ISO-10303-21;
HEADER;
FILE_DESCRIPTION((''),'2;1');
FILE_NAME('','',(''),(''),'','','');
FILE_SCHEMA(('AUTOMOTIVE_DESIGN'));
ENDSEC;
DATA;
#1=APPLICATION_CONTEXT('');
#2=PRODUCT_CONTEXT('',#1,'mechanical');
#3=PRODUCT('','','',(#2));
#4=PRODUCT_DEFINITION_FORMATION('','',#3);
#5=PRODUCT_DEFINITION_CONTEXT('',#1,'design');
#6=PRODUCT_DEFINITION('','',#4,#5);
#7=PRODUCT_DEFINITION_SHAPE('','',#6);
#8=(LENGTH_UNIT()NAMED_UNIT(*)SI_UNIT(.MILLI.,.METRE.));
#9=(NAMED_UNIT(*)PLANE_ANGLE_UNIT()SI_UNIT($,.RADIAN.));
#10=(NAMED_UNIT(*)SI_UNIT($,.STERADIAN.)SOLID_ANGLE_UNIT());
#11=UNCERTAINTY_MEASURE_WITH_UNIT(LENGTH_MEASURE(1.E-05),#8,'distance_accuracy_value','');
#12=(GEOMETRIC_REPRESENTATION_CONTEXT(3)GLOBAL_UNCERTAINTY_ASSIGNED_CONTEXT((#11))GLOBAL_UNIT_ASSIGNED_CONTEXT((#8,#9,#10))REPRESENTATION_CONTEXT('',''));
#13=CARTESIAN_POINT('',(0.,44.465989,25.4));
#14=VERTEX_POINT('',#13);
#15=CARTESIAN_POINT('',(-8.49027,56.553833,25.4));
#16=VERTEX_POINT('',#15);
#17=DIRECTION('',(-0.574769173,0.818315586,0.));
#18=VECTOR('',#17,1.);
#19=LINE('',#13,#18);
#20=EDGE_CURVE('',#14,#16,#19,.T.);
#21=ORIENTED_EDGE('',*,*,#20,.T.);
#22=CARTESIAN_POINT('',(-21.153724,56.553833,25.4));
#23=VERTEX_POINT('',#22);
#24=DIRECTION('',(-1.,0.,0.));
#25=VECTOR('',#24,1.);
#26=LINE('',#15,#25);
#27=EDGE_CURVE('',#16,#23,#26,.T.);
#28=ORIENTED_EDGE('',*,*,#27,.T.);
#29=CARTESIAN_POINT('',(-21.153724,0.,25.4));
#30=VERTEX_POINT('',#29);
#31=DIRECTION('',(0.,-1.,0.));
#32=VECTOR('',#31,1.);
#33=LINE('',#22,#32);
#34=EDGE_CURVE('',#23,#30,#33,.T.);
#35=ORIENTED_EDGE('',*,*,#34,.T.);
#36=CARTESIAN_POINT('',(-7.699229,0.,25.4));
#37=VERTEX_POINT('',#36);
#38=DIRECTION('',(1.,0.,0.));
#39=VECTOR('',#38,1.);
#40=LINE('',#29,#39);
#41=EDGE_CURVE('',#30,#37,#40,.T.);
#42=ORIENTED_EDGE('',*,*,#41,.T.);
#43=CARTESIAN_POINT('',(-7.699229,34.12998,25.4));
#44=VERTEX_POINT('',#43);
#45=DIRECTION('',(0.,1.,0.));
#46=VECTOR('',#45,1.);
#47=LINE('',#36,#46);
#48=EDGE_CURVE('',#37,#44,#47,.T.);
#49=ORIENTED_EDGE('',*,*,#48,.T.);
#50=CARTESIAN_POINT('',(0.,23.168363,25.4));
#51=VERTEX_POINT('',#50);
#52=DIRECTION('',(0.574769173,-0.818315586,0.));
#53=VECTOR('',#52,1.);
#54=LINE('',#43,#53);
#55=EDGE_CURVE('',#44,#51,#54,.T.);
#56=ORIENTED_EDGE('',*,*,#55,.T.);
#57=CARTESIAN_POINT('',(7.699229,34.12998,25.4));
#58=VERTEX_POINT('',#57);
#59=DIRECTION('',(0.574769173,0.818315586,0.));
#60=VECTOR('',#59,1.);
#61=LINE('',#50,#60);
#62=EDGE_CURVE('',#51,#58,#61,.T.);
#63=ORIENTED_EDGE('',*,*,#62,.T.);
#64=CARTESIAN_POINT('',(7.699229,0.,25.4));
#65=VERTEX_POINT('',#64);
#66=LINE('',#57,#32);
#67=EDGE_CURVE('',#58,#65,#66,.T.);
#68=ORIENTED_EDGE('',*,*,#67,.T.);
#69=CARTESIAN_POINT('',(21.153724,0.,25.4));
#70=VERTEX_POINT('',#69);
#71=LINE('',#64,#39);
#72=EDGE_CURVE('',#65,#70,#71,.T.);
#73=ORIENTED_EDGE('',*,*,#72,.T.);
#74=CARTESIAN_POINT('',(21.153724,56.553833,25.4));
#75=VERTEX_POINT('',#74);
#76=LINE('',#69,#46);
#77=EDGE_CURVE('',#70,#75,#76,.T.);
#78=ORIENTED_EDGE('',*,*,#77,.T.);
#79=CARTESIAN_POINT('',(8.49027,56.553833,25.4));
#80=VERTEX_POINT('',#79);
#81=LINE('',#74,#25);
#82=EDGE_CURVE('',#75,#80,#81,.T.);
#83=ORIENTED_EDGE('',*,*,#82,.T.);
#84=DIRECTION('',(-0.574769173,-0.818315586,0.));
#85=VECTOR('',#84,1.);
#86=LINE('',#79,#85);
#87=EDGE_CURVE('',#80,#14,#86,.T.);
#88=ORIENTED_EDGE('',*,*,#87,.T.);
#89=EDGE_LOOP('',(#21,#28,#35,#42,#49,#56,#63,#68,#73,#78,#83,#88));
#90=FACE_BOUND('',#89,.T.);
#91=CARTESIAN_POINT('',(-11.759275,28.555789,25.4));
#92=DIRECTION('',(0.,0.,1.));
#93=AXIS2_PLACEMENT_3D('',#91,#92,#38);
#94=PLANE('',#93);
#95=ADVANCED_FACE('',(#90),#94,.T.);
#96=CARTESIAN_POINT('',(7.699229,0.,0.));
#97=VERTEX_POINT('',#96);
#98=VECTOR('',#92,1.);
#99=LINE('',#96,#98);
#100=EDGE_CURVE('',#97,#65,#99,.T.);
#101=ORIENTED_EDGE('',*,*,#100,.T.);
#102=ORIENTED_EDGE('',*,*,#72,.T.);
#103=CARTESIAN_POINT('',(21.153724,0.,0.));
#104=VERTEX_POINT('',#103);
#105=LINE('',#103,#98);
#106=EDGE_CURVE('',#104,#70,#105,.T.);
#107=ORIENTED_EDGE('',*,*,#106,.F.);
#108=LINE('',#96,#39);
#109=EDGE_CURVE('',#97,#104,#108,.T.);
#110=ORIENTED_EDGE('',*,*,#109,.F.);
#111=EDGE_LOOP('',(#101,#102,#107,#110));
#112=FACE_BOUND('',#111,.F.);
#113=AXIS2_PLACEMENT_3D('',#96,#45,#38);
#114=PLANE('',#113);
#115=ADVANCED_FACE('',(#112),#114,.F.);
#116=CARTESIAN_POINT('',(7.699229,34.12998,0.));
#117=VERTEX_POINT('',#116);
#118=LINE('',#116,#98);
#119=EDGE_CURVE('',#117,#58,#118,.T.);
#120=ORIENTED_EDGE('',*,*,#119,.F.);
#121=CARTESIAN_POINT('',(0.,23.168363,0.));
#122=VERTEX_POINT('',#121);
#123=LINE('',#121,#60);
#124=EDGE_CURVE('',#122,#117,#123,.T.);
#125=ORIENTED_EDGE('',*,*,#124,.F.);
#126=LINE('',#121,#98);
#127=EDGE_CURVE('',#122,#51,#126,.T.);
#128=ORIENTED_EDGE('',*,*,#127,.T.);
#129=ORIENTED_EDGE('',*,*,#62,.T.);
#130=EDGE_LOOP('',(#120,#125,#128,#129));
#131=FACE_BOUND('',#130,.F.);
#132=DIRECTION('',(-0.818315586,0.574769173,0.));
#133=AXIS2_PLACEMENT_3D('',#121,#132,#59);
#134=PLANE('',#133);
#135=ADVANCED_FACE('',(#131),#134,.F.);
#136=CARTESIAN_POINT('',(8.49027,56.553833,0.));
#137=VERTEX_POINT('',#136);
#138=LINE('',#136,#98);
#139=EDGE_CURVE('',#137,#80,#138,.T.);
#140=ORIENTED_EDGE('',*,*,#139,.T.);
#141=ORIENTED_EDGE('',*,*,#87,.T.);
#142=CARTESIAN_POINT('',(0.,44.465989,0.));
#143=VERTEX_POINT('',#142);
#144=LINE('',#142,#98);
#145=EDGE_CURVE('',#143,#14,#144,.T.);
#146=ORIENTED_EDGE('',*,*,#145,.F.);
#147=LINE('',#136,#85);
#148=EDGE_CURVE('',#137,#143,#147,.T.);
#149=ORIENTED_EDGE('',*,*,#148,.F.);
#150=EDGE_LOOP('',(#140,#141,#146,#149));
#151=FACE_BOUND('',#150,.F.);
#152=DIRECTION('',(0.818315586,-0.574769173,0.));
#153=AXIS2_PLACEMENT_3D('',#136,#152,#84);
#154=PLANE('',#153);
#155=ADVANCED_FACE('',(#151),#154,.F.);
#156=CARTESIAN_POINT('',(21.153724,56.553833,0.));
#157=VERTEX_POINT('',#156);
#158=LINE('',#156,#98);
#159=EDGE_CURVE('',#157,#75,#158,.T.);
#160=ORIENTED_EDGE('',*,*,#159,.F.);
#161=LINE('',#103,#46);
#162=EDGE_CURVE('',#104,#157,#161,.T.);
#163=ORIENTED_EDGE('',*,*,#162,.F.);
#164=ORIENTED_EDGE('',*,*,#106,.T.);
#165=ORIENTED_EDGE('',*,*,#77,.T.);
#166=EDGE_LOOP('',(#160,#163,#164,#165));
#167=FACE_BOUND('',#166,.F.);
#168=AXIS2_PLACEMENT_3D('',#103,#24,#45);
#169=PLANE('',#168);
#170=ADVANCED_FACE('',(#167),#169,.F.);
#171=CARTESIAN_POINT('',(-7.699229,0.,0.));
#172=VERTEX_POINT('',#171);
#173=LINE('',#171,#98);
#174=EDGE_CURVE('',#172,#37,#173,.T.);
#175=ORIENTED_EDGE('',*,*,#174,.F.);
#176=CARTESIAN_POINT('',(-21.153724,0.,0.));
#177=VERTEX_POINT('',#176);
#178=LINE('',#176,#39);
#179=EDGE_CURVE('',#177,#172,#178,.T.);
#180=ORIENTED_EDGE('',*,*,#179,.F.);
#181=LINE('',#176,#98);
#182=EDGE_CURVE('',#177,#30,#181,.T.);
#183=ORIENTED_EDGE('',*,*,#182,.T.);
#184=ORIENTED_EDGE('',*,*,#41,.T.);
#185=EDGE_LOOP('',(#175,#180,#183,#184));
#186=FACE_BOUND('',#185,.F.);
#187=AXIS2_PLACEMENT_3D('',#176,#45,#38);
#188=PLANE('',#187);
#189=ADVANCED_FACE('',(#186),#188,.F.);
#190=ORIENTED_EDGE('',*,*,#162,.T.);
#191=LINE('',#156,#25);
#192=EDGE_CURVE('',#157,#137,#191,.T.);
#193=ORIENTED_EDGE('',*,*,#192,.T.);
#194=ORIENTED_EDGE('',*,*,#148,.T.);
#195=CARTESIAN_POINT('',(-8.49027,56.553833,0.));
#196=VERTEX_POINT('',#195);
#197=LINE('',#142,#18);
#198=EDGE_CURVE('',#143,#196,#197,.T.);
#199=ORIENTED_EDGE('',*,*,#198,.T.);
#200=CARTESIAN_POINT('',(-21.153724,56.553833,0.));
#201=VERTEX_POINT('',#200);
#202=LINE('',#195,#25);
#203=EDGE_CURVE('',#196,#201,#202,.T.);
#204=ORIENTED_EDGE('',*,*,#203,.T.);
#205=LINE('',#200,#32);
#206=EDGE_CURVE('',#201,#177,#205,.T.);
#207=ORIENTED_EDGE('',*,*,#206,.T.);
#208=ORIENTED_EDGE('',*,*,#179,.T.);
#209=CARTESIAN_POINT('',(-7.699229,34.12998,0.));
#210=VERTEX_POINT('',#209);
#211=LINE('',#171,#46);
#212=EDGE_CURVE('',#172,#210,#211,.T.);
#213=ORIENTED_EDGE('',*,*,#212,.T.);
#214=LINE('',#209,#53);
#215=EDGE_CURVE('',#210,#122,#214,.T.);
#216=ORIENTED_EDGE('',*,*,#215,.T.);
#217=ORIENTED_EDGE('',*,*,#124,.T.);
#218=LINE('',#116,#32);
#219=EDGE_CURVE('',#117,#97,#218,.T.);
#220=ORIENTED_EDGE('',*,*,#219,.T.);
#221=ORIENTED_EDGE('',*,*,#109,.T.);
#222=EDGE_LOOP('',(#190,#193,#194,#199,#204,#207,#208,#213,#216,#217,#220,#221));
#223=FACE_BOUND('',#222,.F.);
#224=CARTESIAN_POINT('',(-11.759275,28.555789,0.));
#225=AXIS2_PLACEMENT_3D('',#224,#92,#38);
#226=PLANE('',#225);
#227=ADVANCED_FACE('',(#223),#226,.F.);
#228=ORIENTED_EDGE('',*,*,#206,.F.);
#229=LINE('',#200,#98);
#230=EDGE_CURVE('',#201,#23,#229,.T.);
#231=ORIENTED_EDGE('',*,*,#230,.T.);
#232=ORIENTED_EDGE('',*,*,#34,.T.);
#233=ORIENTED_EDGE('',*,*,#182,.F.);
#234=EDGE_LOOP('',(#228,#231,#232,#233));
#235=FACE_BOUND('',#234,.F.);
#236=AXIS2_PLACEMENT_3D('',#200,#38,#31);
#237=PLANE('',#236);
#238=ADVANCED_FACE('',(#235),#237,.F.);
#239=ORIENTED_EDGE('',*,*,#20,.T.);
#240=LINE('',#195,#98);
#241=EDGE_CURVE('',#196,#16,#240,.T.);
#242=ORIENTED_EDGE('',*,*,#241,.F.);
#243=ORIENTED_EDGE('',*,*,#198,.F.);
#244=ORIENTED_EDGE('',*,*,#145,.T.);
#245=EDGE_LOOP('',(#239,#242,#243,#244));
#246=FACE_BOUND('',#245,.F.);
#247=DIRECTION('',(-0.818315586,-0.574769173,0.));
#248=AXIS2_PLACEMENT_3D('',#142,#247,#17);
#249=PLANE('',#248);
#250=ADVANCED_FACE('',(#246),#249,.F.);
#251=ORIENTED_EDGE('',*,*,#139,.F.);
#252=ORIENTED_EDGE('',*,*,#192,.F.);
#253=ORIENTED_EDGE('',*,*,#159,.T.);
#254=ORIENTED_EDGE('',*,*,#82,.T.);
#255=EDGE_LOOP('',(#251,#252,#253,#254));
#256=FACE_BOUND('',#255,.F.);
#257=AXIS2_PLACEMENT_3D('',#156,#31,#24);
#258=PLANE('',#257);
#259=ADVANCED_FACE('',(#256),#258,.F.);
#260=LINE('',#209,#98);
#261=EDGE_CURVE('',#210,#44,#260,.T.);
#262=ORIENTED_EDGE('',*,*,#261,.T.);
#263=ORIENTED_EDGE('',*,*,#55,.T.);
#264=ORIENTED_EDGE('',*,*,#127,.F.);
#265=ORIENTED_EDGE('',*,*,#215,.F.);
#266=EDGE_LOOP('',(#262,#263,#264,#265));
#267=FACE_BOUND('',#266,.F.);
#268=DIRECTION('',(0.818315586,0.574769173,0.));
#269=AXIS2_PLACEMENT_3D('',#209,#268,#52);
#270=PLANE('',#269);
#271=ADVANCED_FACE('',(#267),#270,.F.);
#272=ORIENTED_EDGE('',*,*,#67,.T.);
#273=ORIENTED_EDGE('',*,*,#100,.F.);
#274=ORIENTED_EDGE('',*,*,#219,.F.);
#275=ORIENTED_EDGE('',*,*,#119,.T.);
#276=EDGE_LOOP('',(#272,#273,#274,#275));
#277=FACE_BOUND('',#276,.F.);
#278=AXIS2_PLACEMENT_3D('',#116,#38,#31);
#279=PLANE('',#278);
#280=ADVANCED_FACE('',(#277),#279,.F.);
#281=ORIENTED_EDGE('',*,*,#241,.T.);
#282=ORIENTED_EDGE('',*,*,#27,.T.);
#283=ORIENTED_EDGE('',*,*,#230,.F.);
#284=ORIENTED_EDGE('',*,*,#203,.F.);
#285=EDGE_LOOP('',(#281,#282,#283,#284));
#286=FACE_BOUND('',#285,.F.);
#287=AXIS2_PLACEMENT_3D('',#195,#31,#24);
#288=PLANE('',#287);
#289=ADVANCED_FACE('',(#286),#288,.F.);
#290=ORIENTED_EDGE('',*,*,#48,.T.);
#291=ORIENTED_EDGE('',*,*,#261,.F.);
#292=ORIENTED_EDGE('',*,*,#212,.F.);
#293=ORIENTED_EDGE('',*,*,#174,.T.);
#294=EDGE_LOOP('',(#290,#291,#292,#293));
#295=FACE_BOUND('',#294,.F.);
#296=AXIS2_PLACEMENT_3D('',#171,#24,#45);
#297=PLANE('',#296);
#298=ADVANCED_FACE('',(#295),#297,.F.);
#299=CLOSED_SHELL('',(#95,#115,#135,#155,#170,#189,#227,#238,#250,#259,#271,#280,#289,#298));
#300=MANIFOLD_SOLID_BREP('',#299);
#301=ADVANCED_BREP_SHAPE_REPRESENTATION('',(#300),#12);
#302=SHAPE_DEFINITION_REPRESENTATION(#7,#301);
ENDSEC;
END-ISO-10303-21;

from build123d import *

# Parameters (mm, degrees)
F0_W          = 29.8302113987
F0_H          = 9.2097856104
F1_DEPTH      = 25.4
F2_T1_DEPTH   = 25.4
F2_T3_DEPTH   = 15.24
F2_T5_DEPTH   = 56.4671399768
F2_T7_DEPTH   = 44.9504289544
F2_T9_DEPTH   = 56.4670330548
F2_T11_DEPTH  = 20.32
F2_T13_DEPTH  = 20.3101045111
F2_T15_DEPTH  = 50.8
F2_T20_DEPTH  = 5.08
F2_T26_DEPTH  = 5.08
F2_T32_DEPTH  = 5.08
F2_T38_DEPTH  = 5.08
F2_S43_W      = 5.08
F2_S43_H      = 5.08
F2_T44_DEPTH  = 5.08
F2_S49_W      = 5.08
F2_S49_H      = 5.08
F2_T50_DEPTH  = 5.08
F2_S55_W      = 5.08
F2_S55_H      = 5.08
F2_T56_DEPTH  = 5.08
F2_S61_W      = 5.08
F2_S61_H      = 5.08
F2_T62_DEPTH  = 5.08
F2_T65_DEPTH  = 11.1376243347
F2_T67_DEPTH  = 11.5693333262
F2_T69_DEPTH  = 19.6702113987
F2_S73_W      = 5.08
F2_S73_H      = 5.08
F2_T74_DEPTH  = 5.08
F2_S79_W      = 5.08
F2_S79_H      = 5.08
F2_T80_DEPTH  = 5.08
F2_S85_W      = 5.08
F2_S85_H      = 5.08
F2_T86_DEPTH  = 5.08
F2_S91_W      = 5.08
F2_S91_H      = 5.08
F2_T92_DEPTH  = 5.08
F2_T96_ANGLE  = 90
F2_T98_ANGLE  = 90
F2_T100_ANGLE = 90
F2_T102_ANGLE = 90
F2_T104_ANGLE = 90
F2_T106_ANGLE = 90
F2_T108_ANGLE = 90
F2_T110_ANGLE = 90
F2_T112_ANGLE = 90
F2_T114_ANGLE = 90
F2_T116_ANGLE = 90
F2_T118_ANGLE = 90
F3_DEPTH      = 25.4
F6_DEPTH      = 25.4


# Not quite as in the source:
# - a fillet or chamfer that OpenCascade refuses, or shapes differently, is made with other operations: its cross-section is extruded or revolved along the edge and cut away or added


with BuildPart() as f1:
    # F0 (on Top) → F1 (new body)
    with BuildSketch(Plane.XY):
        Polygon((-27.6151056993, 52.1290511863), (-27.6151056993, 0), (-14.9151056993, 0), (-14.9151056993, 21.7293333262), (-14.9151056993, 30.9391189367), (-14.9151056993, 52.2367432714), (14.9151056993, 52.2367432714), (14.9151056993, 30.9391189367), (14.9151056993, 21.7293333262), (14.9151056993, 0), (27.6151056993, 0), (27.4854470044, 66.6270330548), (-27.6151056993, 66.6270330548), align=None)
        with Locations((0, 26.3342261314)):
            Rectangle(F0_W, F0_H)
    extrude(amount=F1_DEPTH)

    # F2: fillet of radius 5.08 on 36 edges, made by hand

    # F2_s2 → F2_t1 (join)
    with BuildSketch(Plane.XY):
        with BuildLine():
            ThreePointArc((-14.9151056993, 36.0191189367), (-13.4272081478, 32.4270164882), (-9.8351056993, 30.9391189367))
            Line((-9.8351056993, 30.9391189367), (-14.9151056993, 30.9391189367))
            Line((-14.9151056993, 30.9391189367), (-14.9151056993, 36.0191189367))
        make_face()
        with BuildLine():
            ThreePointArc((-14.9151056993, 47.1567432714), (-13.4272081478, 50.7488457198), (-9.8351056993, 52.2367432714))
            Line((-9.8351056993, 52.2367432714), (-14.9151056993, 52.2367432714))
            Line((-14.9151056993, 52.2367432714), (-14.9151056993, 47.1567432714))
        make_face()
        with BuildLine():
            ThreePointArc((9.8351056993, 52.2367432714), (13.4272081478, 50.7488457198), (14.9151056993, 47.1567432714))
            Line((14.9151056993, 47.1567432714), (14.9151056993, 52.2367432714))
            Line((14.9151056993, 52.2367432714), (9.8351056993, 52.2367432714))
        make_face()
        with BuildLine():
            ThreePointArc((14.9151056993, 36.0191189367), (13.4272081478, 32.4270164882), (9.8351056993, 30.9391189367))
            Line((9.8351056993, 30.9391189367), (14.9151056993, 30.9391189367))
            Line((14.9151056993, 30.9391189367), (14.9151056993, 36.0191189367))
        make_face()
        with BuildLine():
            ThreePointArc((9.8351056993, 21.7293333262), (13.4272081478, 20.2414357746), (14.9151056993, 16.6493333262))
            Line((14.9151056993, 16.6493333262), (14.9151056993, 21.7293333262))
            Line((14.9151056993, 21.7293333262), (9.8351056993, 21.7293333262))
        make_face()
        with BuildLine():
            ThreePointArc((-14.9151056993, 16.6493333262), (-13.4272081478, 20.2414357746), (-9.8351056993, 21.7293333262))
            Line((-9.8351056993, 21.7293333262), (-14.9151056993, 21.7293333262))
            Line((-14.9151056993, 21.7293333262), (-14.9151056993, 16.6493333262))
        make_face()
    extrude(amount=F2_T1_DEPTH)

    # F2_s4 → F2_t3 (cut)
    with BuildSketch(Plane.XY.offset(5.08)):
        with BuildLine():
            ThreePointArc((27.6052005914, 5.089885851), (26.1208061363, 1.4913944298), (22.5252102105, 0))
            Line((22.5252102105, 0), (27.6151056993, 0))
            Line((27.6151056993, 0), (27.6052005914, 5.089885851))
        make_face()
        with BuildLine():
            ThreePointArc((22.4153232551, 66.6270330548), (26.0039288252, 65.1426289806), (27.4953136359, 61.5569189059))
            Line((27.4953136359, 61.5569189059), (27.4854470044, 66.6270330548))
            Line((27.4854470044, 66.6270330548), (22.4153232551, 66.6270330548))
        make_face()
        with BuildLine():
            ThreePointArc((-22.5351056993, 66.6270330548), (-26.1272081478, 65.1391355033), (-27.6151056993, 61.5470330548))
            Line((-27.6151056993, 61.5470330548), (-27.6151056993, 66.6270330548))
            Line((-27.6151056993, 66.6270330548), (-22.5351056993, 66.6270330548))
        make_face()
        with BuildLine():
            ThreePointArc((-27.6151056993, 5.08), (-26.1272081478, 1.4878975516), (-22.5351056993, 0))
            Line((-22.5351056993, 0), (-27.6151056993, 0))
            Line((-27.6151056993, 0), (-27.6151056993, 5.08))
        make_face()
    extrude(amount=F2_T3_DEPTH, mode=Mode.SUBTRACT)

    # F2_s6 → F2_t5 (cut)
    with BuildSketch(Plane(origin=(-0.0098005283, 5.0361460274, 0), x_dir=(0, 0, 1), z_dir=(-0.0019460337, 0.9999981065, 0))):
        with BuildLine():
            ThreePointArc((5.08, 27.6150534094), (1.4878975516, 26.1271558579), (0, 22.5350534094))
            Line((0, 22.5350534094), (0, 27.6150534094))
            Line((0, 27.6150534094), (5.08, 27.6150534094))
        make_face()
        with BuildLine():
            ThreePointArc((20.32, 27.6150534094), (23.9121024484, 26.1271558579), (25.4, 22.5350534094))
            Line((25.4, 22.5350534094), (25.4, 27.6150534094))
            Line((25.4, 27.6150534094), (20.32, 27.6150534094))
        make_face()
    extrude(amount=F2_T5_DEPTH, mode=Mode.SUBTRACT)

    # F2_s8 → F2_t7 (cut)
    with BuildSketch(Plane.YZ.offset(-22.5351056993)):
        with BuildLine():
            ThreePointArc((66.6270330548, 5.08), (65.1391355033, 1.4878975516), (61.5470330548, 0))
            Line((61.5470330548, 0), (66.6270330548, 0))
            Line((66.6270330548, 0), (66.6270330548, 5.08))
        make_face()
        with BuildLine():
            ThreePointArc((66.6270330548, 20.32), (65.1391355033, 23.9121024484), (61.5470330548, 25.4))
            Line((61.5470330548, 25.4), (66.6270330548, 25.4))
            Line((66.6270330548, 25.4), (66.6270330548, 20.32))
        make_face()
    extrude(amount=F2_T7_DEPTH, mode=Mode.SUBTRACT)

    # F2_s10 → F2_t9 (cut)
    with BuildSketch(Plane.XZ.offset(-61.5470330548)):
        with BuildLine():
            ThreePointArc((-27.6151056993, 20.32), (-26.1272081478, 23.9121024484), (-22.5351056993, 25.4))
            Line((-22.5351056993, 25.4), (-27.6151056993, 25.4))
            Line((-27.6151056993, 25.4), (-27.6151056993, 20.32))
        make_face()
        with BuildLine():
            ThreePointArc((-27.6151056993, 5.08), (-26.1272081478, 1.4878975516), (-22.5351056993, 0))
            Line((-22.5351056993, 0), (-27.6151056993, 0))
            Line((-27.6151056993, 0), (-27.6151056993, 5.08))
        make_face()
    extrude(amount=F2_T9_DEPTH, mode=Mode.SUBTRACT)

    # F2_s12 → F2_t11 (cut)
    with BuildSketch(Plane.YZ.offset(-22.5351056993)):
        with BuildLine():
            ThreePointArc((5.08, 25.4), (1.4878975516, 23.9121024484), (0, 20.32))
            Line((0, 20.32), (0, 25.4))
            Line((0, 25.4), (5.08, 25.4))
        make_face()
        with BuildLine():
            ThreePointArc((5.08, 0), (1.4878975516, 1.4878975516), (0, 5.08))
            Line((0, 5.08), (0, 0))
            Line((0, 0), (5.08, 0))
        make_face()
    extrude(amount=F2_T11_DEPTH, mode=Mode.SUBTRACT)

    # F2_s14 → F2_t13 (cut)
    with BuildSketch(Plane.YZ.offset(2.2151056993)):
        with BuildLine():
            ThreePointArc((5.08, 25.4), (1.4878975516, 23.9121024484), (0, 20.32))
            Line((0, 20.32), (0, 25.4))
            Line((0, 25.4), (5.08, 25.4))
        make_face()
        with BuildLine():
            ThreePointArc((5.08, 0), (1.4878975516, 1.4878975516), (0, 5.08))
            Line((0, 5.08), (0, 0))
            Line((0, 0), (5.08, 0))
        make_face()
    extrude(amount=F2_T13_DEPTH, mode=Mode.SUBTRACT)

    # F2_s16 → F2_t15 (cut)
    with BuildSketch(Plane.XY.offset(-12.7)):
        with BuildLine():
            ThreePointArc((19.9951056993, 0), (16.4030032509, 1.4878975516), (14.9151056993, 5.08))
            Line((14.9151056993, 5.08), (14.9151056993, 0))
            Line((14.9151056993, 0), (19.9951056993, 0))
        make_face()
        with BuildLine():
            ThreePointArc((-19.9951056993, 0), (-16.4030032509, 1.4878975516), (-14.9151056993, 5.08))
            Line((-14.9151056993, 5.08), (-14.9151056993, 0))
            Line((-14.9151056993, 0), (-19.9951056993, 0))
        make_face()
    extrude(amount=F2_T15_DEPTH, mode=Mode.SUBTRACT)


with BuildPart() as f2_tool18:
    # F2_s19 → F2_t20 (new body)
    with BuildSketch(Plane.XY.offset(5.08)):
        Polygon((22.5252102105, 5.08), (22.5252102105, 0), (27.6151056993, 0), (27.6052005914, 5.089885851), align=None)
    extrude(amount=-F2_T20_DEPTH)

    # F2_s21 → F2_t22 (revolve, cut)
    with BuildSketch(Plane(origin=(22.5252102105, 5.08, 5.08), x_dir=(-0.7077944736, 0.7064184193, 0), z_dir=(-0.7064184193, -0.7077944736, 0))):
        with BuildLine():
            ThreePointArc((0, -5.08), (5.08, 0), (0, 5.08))
            Line((0, 5.08), (0, -5.08))
        make_face()
    revolve(axis=Axis((22.5252102105, 5.08, 5.08), (0, 0, -1)), mode=Mode.SUBTRACT)


with BuildPart() as f1_1:
    add(f1.part)

    # F2_t17: cut F2_tool18
    add(f2_tool18.part, mode=Mode.SUBTRACT)


with BuildPart() as f2_tool24:
    # F2_s25 → F2_t26 (new body)
    with BuildSketch(Plane.XY.offset(20.32)):
        Polygon((22.5252102105, 5.08), (22.5252102105, 0), (27.6151056993, 0), (27.6052005914, 5.089885851), align=None)
    extrude(amount=F2_T26_DEPTH)

    # F2_s27 → F2_t28 (revolve, cut)
    with BuildSketch(Plane(origin=(22.5252102105, 5.08, 20.32), x_dir=(-0.7077944736, 0.7064184193, 0), z_dir=(0.7064184193, 0.7077944736, 0))):
        with BuildLine():
            ThreePointArc((0, -5.08), (5.08, 0), (0, 5.08))
            Line((0, 5.08), (0, -5.08))
        make_face()
    revolve(axis=Axis((22.5252102105, 5.08, 20.32), (0, 0, 1)), mode=Mode.SUBTRACT)


with BuildPart() as f1_2:
    add(f1_1.part)

    # F2_t23: cut F2_tool24
    add(f2_tool24.part, mode=Mode.SUBTRACT)


with BuildPart() as f2_tool30:
    # F2_s31 → F2_t32 (new body)
    with BuildSketch(Plane.XY.offset(5.08)):
        Polygon((22.4153232551, 61.5470330548), (22.4153232551, 66.6270330548), (27.4854470044, 66.6270330548), (27.4953136359, 61.5569189059), align=None)
    extrude(amount=-F2_T32_DEPTH)

    # F2_s33 → F2_t34 (revolve, cut)
    with BuildSketch(Plane(origin=(22.4153232551, 61.5470330548, 5.08), x_dir=(-0.7064184193, -0.7077944736, 0), z_dir=(0.7077944736, -0.7064184193, 0))):
        with BuildLine():
            ThreePointArc((0, -5.08), (5.08, 0), (0, 5.08))
            Line((0, 5.08), (0, -5.08))
        make_face()
    revolve(axis=Axis((22.4153232551, 61.5470330548, 5.08), (0, 0, -1)), mode=Mode.SUBTRACT)


with BuildPart() as f1_3:
    add(f1_2.part)

    # F2_t29: cut F2_tool30
    add(f2_tool30.part, mode=Mode.SUBTRACT)


with BuildPart() as f2_tool36:
    # F2_s37 → F2_t38 (new body)
    with BuildSketch(Plane.XY.offset(20.32)):
        Polygon((22.4153232551, 61.5470330548), (22.4153232551, 66.6270330548), (27.4854470044, 66.6270330548), (27.4953136359, 61.5569189059), align=None)
    extrude(amount=F2_T38_DEPTH)

    # F2_s39 → F2_t40 (revolve, cut)
    with BuildSketch(Plane(origin=(22.4153232551, 61.5470330548, 20.32), x_dir=(-0.7064184193, -0.7077944736, 0), z_dir=(-0.7077944736, 0.7064184193, 0))):
        with BuildLine():
            ThreePointArc((0, -5.08), (5.08, 0), (0, 5.08))
            Line((0, 5.08), (0, -5.08))
        make_face()
    revolve(axis=Axis((22.4153232551, 61.5470330548, 20.32), (0, 0, 1)), mode=Mode.SUBTRACT)


with BuildPart() as f1_4:
    add(f1_3.part)

    # F2_t35: cut F2_tool36
    add(f2_tool36.part, mode=Mode.SUBTRACT)


with BuildPart() as f2_tool42:
    # F2_s43 → F2_t44 (new body)
    with BuildSketch(Plane.XZ.offset(-61.5470330548)):
        with Locations((-25.0751056993, 2.54)):
            Rectangle(F2_S43_W, F2_S43_H)
    extrude(amount=-F2_T44_DEPTH)

    # F2_s45 → F2_t46 (revolve, cut)
    with BuildSketch(Plane(origin=(-22.5351056993, 61.5470330548, 5.08), x_dir=(0.7071067812, 0, 0.7071067812), z_dir=(-0.7071067812, 0, 0.7071067812))):
        with BuildLine():
            ThreePointArc((0, -5.08), (5.08, 0), (0, 5.08))
            Line((0, 5.08), (0, -5.08))
        make_face()
    revolve(axis=Axis((-22.5351056993, 61.5470330548, 5.08), (0, 1, 0)), mode=Mode.SUBTRACT)


with BuildPart() as f1_5:
    add(f1_4.part)

    # F2_t41: cut F2_tool42
    add(f2_tool42.part, mode=Mode.SUBTRACT)


with BuildPart() as f2_tool48:
    # F2_s49 → F2_t50 (new body)
    with BuildSketch(Plane.XZ.offset(-61.5470330548)):
        with Locations((-25.0751056993, 22.86)):
            Rectangle(F2_S49_W, F2_S49_H)
    extrude(amount=-F2_T50_DEPTH)

    # F2_s51 → F2_t52 (revolve, cut)
    with BuildSketch(Plane(origin=(-22.5351056993, 61.5470330548, 20.32), x_dir=(0.7071067812, 0, -0.7071067812), z_dir=(0.7071067812, 0, 0.7071067812))):
        with BuildLine():
            ThreePointArc((0, -5.08), (5.08, 0), (0, 5.08))
            Line((0, 5.08), (0, -5.08))
        make_face()
    revolve(axis=Axis((-22.5351056993, 61.5470330548, 20.32), (0, 1, 0)), mode=Mode.SUBTRACT)


with BuildPart() as f1_6:
    add(f1_5.part)

    # F2_t47: cut F2_tool48
    add(f2_tool48.part, mode=Mode.SUBTRACT)


with BuildPart() as f2_tool54:
    # F2_s55 → F2_t56 (new body)
    with BuildSketch(Plane.YZ.offset(-22.5351056993)):
        with Locations((2.54, 22.86)):
            Rectangle(F2_S55_W, F2_S55_H)
    extrude(amount=-F2_T56_DEPTH)

    # F2_s57 → F2_t58 (revolve, cut)
    with BuildSketch(Plane(origin=(-22.5351056993, 5.08, 20.32), x_dir=(0, 0.7071067812, -0.7071067812), z_dir=(0, 0.7071067812, 0.7071067812))):
        with BuildLine():
            ThreePointArc((0, -5.08), (5.08, 0), (0, 5.08))
            Line((0, 5.08), (0, -5.08))
        make_face()
    revolve(axis=Axis((-22.5351056993, 5.08, 20.32), (-1, 0, 0)), mode=Mode.SUBTRACT)


with BuildPart() as f1_7:
    add(f1_6.part)

    # F2_t53: cut F2_tool54
    add(f2_tool54.part, mode=Mode.SUBTRACT)


with BuildPart() as f2_tool60:
    # F2_s61 → F2_t62 (new body)
    with BuildSketch(Plane.YZ.offset(-22.5351056993)):
        with Locations((2.54, 2.54)):
            Rectangle(F2_S61_W, F2_S61_H)
    extrude(amount=-F2_T62_DEPTH)

    # F2_s63 → F2_t64 (revolve, cut)
    with BuildSketch(Plane(origin=(-22.5351056993, 5.08, 5.08), x_dir=(0, 0.7071067812, 0.7071067812), z_dir=(0, -0.7071067812, 0.7071067812))):
        with BuildLine():
            ThreePointArc((0, -5.08), (5.08, 0), (0, 5.08))
            Line((0, 5.08), (0, -5.08))
        make_face()
    revolve(axis=Axis((-22.5351056993, 5.08, 5.08), (-1, 0, 0)), mode=Mode.SUBTRACT)


with BuildPart() as f1_8:
    add(f1_7.part)

    # F2_t59: cut F2_tool60
    add(f2_tool60.part, mode=Mode.SUBTRACT)

    # F2_s66 → F2_t65 (cut)
    with BuildSketch(Plane.XZ.offset(-47.1567432714)):
        with BuildLine():
            ThreePointArc((-19.9951056993, 0), (-16.4030032509, 1.4878975516), (-14.9151056993, 5.08))
            Line((-14.9151056993, 5.08), (-14.9151056993, 0))
            Line((-14.9151056993, 0), (-19.9951056993, 0))
        make_face()
        with BuildLine():
            ThreePointArc((-19.9951056993, 25.4), (-16.4030032509, 23.9121024484), (-14.9151056993, 20.32))
            Line((-14.9151056993, 20.32), (-14.9151056993, 25.4))
            Line((-14.9151056993, 25.4), (-19.9951056993, 25.4))
        make_face()
        with BuildLine():
            ThreePointArc((19.9951056993, 25.4), (16.4030032509, 23.9121024484), (14.9151056993, 20.32))
            Line((14.9151056993, 20.32), (14.9151056993, 25.4))
            Line((14.9151056993, 25.4), (19.9951056993, 25.4))
        make_face()
        with BuildLine():
            ThreePointArc((19.9951056993, 0), (16.4030032509, 1.4878975516), (14.9151056993, 5.08))
            Line((14.9151056993, 5.08), (14.9151056993, 0))
            Line((14.9151056993, 0), (19.9951056993, 0))
        make_face()
    extrude(amount=F2_T65_DEPTH, mode=Mode.SUBTRACT)

    # F2_s68 → F2_t67 (cut)
    with BuildSketch(Plane.XZ.offset(-16.6493333262)):
        with BuildLine():
            ThreePointArc((-19.9951056993, 25.4), (-16.4030032509, 23.9121024484), (-14.9151056993, 20.32))
            Line((-14.9151056993, 20.32), (-14.9151056993, 25.4))
            Line((-14.9151056993, 25.4), (-19.9951056993, 25.4))
        make_face()
        with BuildLine():
            ThreePointArc((19.9951056993, 25.4), (16.4030032509, 23.9121024484), (14.9151056993, 20.32))
            Line((14.9151056993, 20.32), (14.9151056993, 25.4))
            Line((14.9151056993, 25.4), (19.9951056993, 25.4))
        make_face()
        with BuildLine():
            ThreePointArc((19.9951056993, 0), (16.4030032509, 1.4878975516), (14.9151056993, 5.08))
            Line((14.9151056993, 5.08), (14.9151056993, 0))
            Line((14.9151056993, 0), (19.9951056993, 0))
        make_face()
        with BuildLine():
            ThreePointArc((-19.9951056993, 0), (-16.4030032509, 1.4878975516), (-14.9151056993, 5.08))
            Line((-14.9151056993, 5.08), (-14.9151056993, 0))
            Line((-14.9151056993, 0), (-19.9951056993, 0))
        make_face()
    extrude(amount=F2_T67_DEPTH, mode=Mode.SUBTRACT)

    # F2_s70 → F2_t69 (cut)
    with BuildSketch(Plane.YZ.offset(-9.8351056993)):
        with BuildLine():
            ThreePointArc((26.8093333262, 25.4), (23.2172308778, 23.9121024484), (21.7293333262, 20.32))
            Line((21.7293333262, 20.32), (21.7293333262, 25.4))
            Line((21.7293333262, 25.4), (26.8093333262, 25.4))
        make_face()
        with BuildLine():
            ThreePointArc((57.3167432714, 25.4), (53.7246408229, 23.9121024484), (52.2367432714, 20.32))
            Line((52.2367432714, 20.32), (52.2367432714, 25.4))
            Line((52.2367432714, 25.4), (57.3167432714, 25.4))
        make_face()
        with BuildLine():
            ThreePointArc((25.8591189367, 25.4), (29.4512213851, 23.9121024484), (30.9391189367, 20.32))
            Line((30.9391189367, 20.32), (30.9391189367, 25.4))
            Line((30.9391189367, 25.4), (25.8591189367, 25.4))
        make_face()
        with BuildLine():
            ThreePointArc((26.8093333262, 0), (23.2172308778, 1.4878975516), (21.7293333262, 5.08))
            Line((21.7293333262, 5.08), (21.7293333262, 0))
            Line((21.7293333262, 0), (26.8093333262, 0))
        make_face()
        with BuildLine():
            ThreePointArc((57.3167432714, 0), (53.7246408229, 1.4878975516), (52.2367432714, 5.08))
            Line((52.2367432714, 5.08), (52.2367432714, 0))
            Line((52.2367432714, 0), (57.3167432714, 0))
        make_face()
        with BuildLine():
            ThreePointArc((25.8591189367, 0), (29.4512213851, 1.4878975516), (30.9391189367, 5.08))
            Line((30.9391189367, 5.08), (30.9391189367, 0))
            Line((30.9391189367, 0), (25.8591189367, 0))
        make_face()
    extrude(amount=F2_T69_DEPTH, mode=Mode.SUBTRACT)


with BuildPart() as f2_tool72:
    # F2_s73 → F2_t74 (new body)
    with BuildSketch(Plane.XY.offset(5.08)):
        with Locations((-17.4551056993, 2.54)):
            Rectangle(F2_S73_W, F2_S73_H)
    extrude(amount=-F2_T74_DEPTH)

    # F2_s75 → F2_t76 (revolve, cut)
    with BuildSketch(Plane(origin=(-19.9951056993, 5.08, 5.08), x_dir=(-0.7071067812, 0.7071067812, 0), z_dir=(-0.7071067812, -0.7071067812, 0))):
        with BuildLine():
            ThreePointArc((0, -5.08), (5.08, 0), (0, 5.08))
            Line((0, 5.08), (0, -5.08))
        make_face()
    revolve(axis=Axis((-19.9951056993, 5.08, 5.08), (0, 0, -1)), mode=Mode.SUBTRACT)


with BuildPart() as f1_9:
    add(f1_8.part)

    # F2_t71: cut F2_tool72
    add(f2_tool72.part, mode=Mode.SUBTRACT)


with BuildPart() as f2_tool78:
    # F2_s79 → F2_t80 (new body)
    with BuildSketch(Plane.XY.offset(5.08)):
        with Locations((17.4551056993, 2.54)):
            Rectangle(F2_S79_W, F2_S79_H)
    extrude(amount=-F2_T80_DEPTH)

    # F2_s81 → F2_t82 (revolve, cut)
    with BuildSketch(Plane(origin=(19.9951056993, 5.08, 5.08), x_dir=(0.7071067812, 0.7071067812, 0), z_dir=(-0.7071067812, 0.7071067812, 0))):
        with BuildLine():
            ThreePointArc((0, -5.08), (5.08, 0), (0, 5.08))
            Line((0, 5.08), (0, -5.08))
        make_face()
    revolve(axis=Axis((19.9951056993, 5.08, 5.08), (0, 0, -1)), mode=Mode.SUBTRACT)


with BuildPart() as f1_10:
    add(f1_9.part)

    # F2_t77: cut F2_tool78
    add(f2_tool78.part, mode=Mode.SUBTRACT)


with BuildPart() as f2_tool84:
    # F2_s85 → F2_t86 (new body)
    with BuildSketch(Plane.XY.offset(20.32)):
        with Locations((17.4551056993, 2.54)):
            Rectangle(F2_S85_W, F2_S85_H)
    extrude(amount=F2_T86_DEPTH)

    # F2_s87 → F2_t88 (revolve, cut)
    with BuildSketch(Plane(origin=(19.9951056993, 5.08, 20.32), x_dir=(0.7071067812, 0.7071067812, 0), z_dir=(0.7071067812, -0.7071067812, 0))):
        with BuildLine():
            ThreePointArc((0, -5.08), (5.08, 0), (0, 5.08))
            Line((0, 5.08), (0, -5.08))
        make_face()
    revolve(axis=Axis((19.9951056993, 5.08, 20.32), (0, 0, 1)), mode=Mode.SUBTRACT)


with BuildPart() as f1_11:
    add(f1_10.part)

    # F2_t83: cut F2_tool84
    add(f2_tool84.part, mode=Mode.SUBTRACT)


with BuildPart() as f2_tool90:
    # F2_s91 → F2_t92 (new body)
    with BuildSketch(Plane.XY.offset(20.32)):
        with Locations((-17.4551056993, 2.54)):
            Rectangle(F2_S91_W, F2_S91_H)
    extrude(amount=F2_T92_DEPTH)

    # F2_s93 → F2_t94 (revolve, cut)
    with BuildSketch(Plane(origin=(-19.9951056993, 5.08, 20.32), x_dir=(-0.7071067812, 0.7071067812, 0), z_dir=(0.7071067812, 0.7071067812, 0))):
        with BuildLine():
            ThreePointArc((0, -5.08), (5.08, 0), (0, 5.08))
            Line((0, 5.08), (0, -5.08))
        make_face()
    revolve(axis=Axis((-19.9951056993, 5.08, 20.32), (0, 0, 1)), mode=Mode.SUBTRACT)


with BuildPart() as f1_12:
    add(f1_11.part)

    # F2_t89: cut F2_tool90
    add(f2_tool90.part, mode=Mode.SUBTRACT)

    # F2_s95 → F2_t96 (revolve, cut)
    with BuildSketch(Plane.XZ.offset(-36.0191189367)):
        with BuildLine():
            ThreePointArc((19.9951056993, 0), (16.4030032509, 1.4878975516), (14.9151056993, 5.08))
            Line((14.9151056993, 5.08), (14.9151056993, 0))
            Line((14.9151056993, 0), (19.9951056993, 0))
        make_face()
    revolve(axis=Axis((9.8351056993, 36.0191189367, 0), (0, 0, -1)), revolution_arc=F2_T96_ANGLE, mode=Mode.SUBTRACT)

    # F2_s97 → F2_t98 (revolve, cut)
    with BuildSketch(Plane.XZ.offset(-36.0191189367)):
        with BuildLine():
            ThreePointArc((-19.9951056993, 0), (-16.4030032509, 1.4878975516), (-14.9151056993, 5.08))
            Line((-14.9151056993, 5.08), (-14.9151056993, 0))
            Line((-14.9151056993, 0), (-19.9951056993, 0))
        make_face()
    revolve(axis=Axis((-9.8351056993, 36.0191189367, 0), (0, 0, 1)), revolution_arc=F2_T98_ANGLE, mode=Mode.SUBTRACT)

    # F2_s99 → F2_t100 (revolve, cut)
    with BuildSketch(Plane.XZ.offset(-47.1567432714)):
        with BuildLine():
            ThreePointArc((-19.9951056993, 0), (-16.4030032509, 1.4878975516), (-14.9151056993, 5.08))
            Line((-14.9151056993, 5.08), (-14.9151056993, 0))
            Line((-14.9151056993, 0), (-19.9951056993, 0))
        make_face()
    revolve(axis=Axis((-9.8351056993, 47.1567432714, 0), (0, 0, -1)), revolution_arc=F2_T100_ANGLE, mode=Mode.SUBTRACT)

    # F2_s101 → F2_t102 (revolve, cut)
    with BuildSketch(Plane.YZ.offset(9.8351056993)):
        with BuildLine():
            ThreePointArc((57.3167432714, 0), (53.7246408229, 1.4878975516), (52.2367432714, 5.08))
            Line((52.2367432714, 5.08), (52.2367432714, 0))
            Line((52.2367432714, 0), (57.3167432714, 0))
        make_face()
    revolve(axis=Axis((9.8351056993, 47.1567432714, 0), (0, 0, -1)), revolution_arc=F2_T102_ANGLE, mode=Mode.SUBTRACT)

    # F2_s103 → F2_t104 (revolve, cut)
    with BuildSketch(Plane.XZ.offset(-16.6493333262)):
        with BuildLine():
            ThreePointArc((-19.9951056993, 0), (-16.4030032509, 1.4878975516), (-14.9151056993, 5.08))
            Line((-14.9151056993, 5.08), (-14.9151056993, 0))
            Line((-14.9151056993, 0), (-19.9951056993, 0))
        make_face()
    revolve(axis=Axis((-9.8351056993, 16.6493333262, 0), (0, 0, -1)), revolution_arc=F2_T104_ANGLE, mode=Mode.SUBTRACT)

    # F2_s105 → F2_t106 (revolve, cut)
    with BuildSketch(Plane.YZ.offset(9.8351056993)):
        with BuildLine():
            ThreePointArc((26.8093333262, 0), (23.2172308778, 1.4878975516), (21.7293333262, 5.08))
            Line((21.7293333262, 5.08), (21.7293333262, 0))
            Line((21.7293333262, 0), (26.8093333262, 0))
        make_face()
    revolve(axis=Axis((9.8351056993, 16.6493333262, 0), (0, 0, -1)), revolution_arc=F2_T106_ANGLE, mode=Mode.SUBTRACT)

    # F2_s107 → F2_t108 (revolve, cut)
    with BuildSketch(Plane.XZ.offset(-36.0191189367)):
        with BuildLine():
            ThreePointArc((19.9951056993, 25.4), (16.4030032509, 23.9121024484), (14.9151056993, 20.32))
            Line((14.9151056993, 20.32), (14.9151056993, 25.4))
            Line((14.9151056993, 25.4), (19.9951056993, 25.4))
        make_face()
    revolve(axis=Axis((9.8351056993, 36.0191189367, 25.4), (0, 0, -1)), revolution_arc=F2_T108_ANGLE, mode=Mode.SUBTRACT)

    # F2_s109 → F2_t110 (revolve, cut)
    with BuildSketch(Plane.XZ.offset(-36.0191189367)):
        with BuildLine():
            ThreePointArc((-19.9951056993, 25.4), (-16.4030032509, 23.9121024484), (-14.9151056993, 20.32))
            Line((-14.9151056993, 20.32), (-14.9151056993, 25.4))
            Line((-14.9151056993, 25.4), (-19.9951056993, 25.4))
        make_face()
    revolve(axis=Axis((-9.8351056993, 36.0191189367, 25.4), (0, 0, 1)), revolution_arc=F2_T110_ANGLE, mode=Mode.SUBTRACT)

    # F2_s111 → F2_t112 (revolve, cut)
    with BuildSketch(Plane.YZ.offset(9.8351056993)):
        with BuildLine():
            ThreePointArc((57.3167432714, 25.4), (53.7246408229, 23.9121024484), (52.2367432714, 20.32))
            Line((52.2367432714, 20.32), (52.2367432714, 25.4))
            Line((52.2367432714, 25.4), (57.3167432714, 25.4))
        make_face()
    revolve(axis=Axis((9.8351056993, 47.1567432714, 25.4), (0, 0, -1)), revolution_arc=F2_T112_ANGLE, mode=Mode.SUBTRACT)

    # F2_s113 → F2_t114 (revolve, cut)
    with BuildSketch(Plane.XZ.offset(-47.1567432714)):
        with BuildLine():
            ThreePointArc((-19.9951056993, 25.4), (-16.4030032509, 23.9121024484), (-14.9151056993, 20.32))
            Line((-14.9151056993, 20.32), (-14.9151056993, 25.4))
            Line((-14.9151056993, 25.4), (-19.9951056993, 25.4))
        make_face()
    revolve(axis=Axis((-9.8351056993, 47.1567432714, 25.4), (0, 0, -1)), revolution_arc=F2_T114_ANGLE, mode=Mode.SUBTRACT)

    # F2_s115 → F2_t116 (revolve, cut)
    with BuildSketch(Plane.YZ.offset(9.8351056993)):
        with BuildLine():
            ThreePointArc((26.8093333262, 25.4), (23.2172308778, 23.9121024484), (21.7293333262, 20.32))
            Line((21.7293333262, 20.32), (21.7293333262, 25.4))
            Line((21.7293333262, 25.4), (26.8093333262, 25.4))
        make_face()
    revolve(axis=Axis((9.8351056993, 16.6493333262, 25.4), (0, 0, -1)), revolution_arc=F2_T116_ANGLE, mode=Mode.SUBTRACT)

    # F2_s117 → F2_t118 (revolve, cut)
    with BuildSketch(Plane.XZ.offset(-16.6493333262)):
        with BuildLine():
            ThreePointArc((-19.9951056993, 25.4), (-16.4030032509, 23.9121024484), (-14.9151056993, 20.32))
            Line((-14.9151056993, 20.32), (-14.9151056993, 25.4))
            Line((-14.9151056993, 25.4), (-19.9951056993, 25.4))
        make_face()
    revolve(axis=Axis((-9.8351056993, 16.6493333262, 25.4), (0, 0, -1)), revolution_arc=F2_T118_ANGLE, mode=Mode.SUBTRACT)

    # F3 (add): a face of the model
    f3_faces = [f1_12.faces().sort_by_distance(p)[0] for p in [
        (0, 58.0391668239, 25.4),
    ]]
    extrude(f3_faces, amount=F3_DEPTH)


with BuildPart() as f6:
    # F5 (on Top) → F6 (new body)
    with BuildSketch(Plane.XY):
        Polygon((-8.4902700037, 56.5538331866), (-21.153723821, 56.5538331866), (-21.153723821, 0), (-7.6992294526, 0), (-7.6992294526, 34.1299795523), (0, 23.1683626771), (0, 44.4659888744), align=None)
        Polygon((8.4902700037, 56.5538331866), (0, 44.4659888744), (0, 23.1683626771), (7.6992294526, 34.1299795523), (7.6992294526, 0), (21.153723821, 0), (21.153723821, 56.5538331866), align=None)
    extrude(amount=F6_DEPTH)


solid = f6.part
